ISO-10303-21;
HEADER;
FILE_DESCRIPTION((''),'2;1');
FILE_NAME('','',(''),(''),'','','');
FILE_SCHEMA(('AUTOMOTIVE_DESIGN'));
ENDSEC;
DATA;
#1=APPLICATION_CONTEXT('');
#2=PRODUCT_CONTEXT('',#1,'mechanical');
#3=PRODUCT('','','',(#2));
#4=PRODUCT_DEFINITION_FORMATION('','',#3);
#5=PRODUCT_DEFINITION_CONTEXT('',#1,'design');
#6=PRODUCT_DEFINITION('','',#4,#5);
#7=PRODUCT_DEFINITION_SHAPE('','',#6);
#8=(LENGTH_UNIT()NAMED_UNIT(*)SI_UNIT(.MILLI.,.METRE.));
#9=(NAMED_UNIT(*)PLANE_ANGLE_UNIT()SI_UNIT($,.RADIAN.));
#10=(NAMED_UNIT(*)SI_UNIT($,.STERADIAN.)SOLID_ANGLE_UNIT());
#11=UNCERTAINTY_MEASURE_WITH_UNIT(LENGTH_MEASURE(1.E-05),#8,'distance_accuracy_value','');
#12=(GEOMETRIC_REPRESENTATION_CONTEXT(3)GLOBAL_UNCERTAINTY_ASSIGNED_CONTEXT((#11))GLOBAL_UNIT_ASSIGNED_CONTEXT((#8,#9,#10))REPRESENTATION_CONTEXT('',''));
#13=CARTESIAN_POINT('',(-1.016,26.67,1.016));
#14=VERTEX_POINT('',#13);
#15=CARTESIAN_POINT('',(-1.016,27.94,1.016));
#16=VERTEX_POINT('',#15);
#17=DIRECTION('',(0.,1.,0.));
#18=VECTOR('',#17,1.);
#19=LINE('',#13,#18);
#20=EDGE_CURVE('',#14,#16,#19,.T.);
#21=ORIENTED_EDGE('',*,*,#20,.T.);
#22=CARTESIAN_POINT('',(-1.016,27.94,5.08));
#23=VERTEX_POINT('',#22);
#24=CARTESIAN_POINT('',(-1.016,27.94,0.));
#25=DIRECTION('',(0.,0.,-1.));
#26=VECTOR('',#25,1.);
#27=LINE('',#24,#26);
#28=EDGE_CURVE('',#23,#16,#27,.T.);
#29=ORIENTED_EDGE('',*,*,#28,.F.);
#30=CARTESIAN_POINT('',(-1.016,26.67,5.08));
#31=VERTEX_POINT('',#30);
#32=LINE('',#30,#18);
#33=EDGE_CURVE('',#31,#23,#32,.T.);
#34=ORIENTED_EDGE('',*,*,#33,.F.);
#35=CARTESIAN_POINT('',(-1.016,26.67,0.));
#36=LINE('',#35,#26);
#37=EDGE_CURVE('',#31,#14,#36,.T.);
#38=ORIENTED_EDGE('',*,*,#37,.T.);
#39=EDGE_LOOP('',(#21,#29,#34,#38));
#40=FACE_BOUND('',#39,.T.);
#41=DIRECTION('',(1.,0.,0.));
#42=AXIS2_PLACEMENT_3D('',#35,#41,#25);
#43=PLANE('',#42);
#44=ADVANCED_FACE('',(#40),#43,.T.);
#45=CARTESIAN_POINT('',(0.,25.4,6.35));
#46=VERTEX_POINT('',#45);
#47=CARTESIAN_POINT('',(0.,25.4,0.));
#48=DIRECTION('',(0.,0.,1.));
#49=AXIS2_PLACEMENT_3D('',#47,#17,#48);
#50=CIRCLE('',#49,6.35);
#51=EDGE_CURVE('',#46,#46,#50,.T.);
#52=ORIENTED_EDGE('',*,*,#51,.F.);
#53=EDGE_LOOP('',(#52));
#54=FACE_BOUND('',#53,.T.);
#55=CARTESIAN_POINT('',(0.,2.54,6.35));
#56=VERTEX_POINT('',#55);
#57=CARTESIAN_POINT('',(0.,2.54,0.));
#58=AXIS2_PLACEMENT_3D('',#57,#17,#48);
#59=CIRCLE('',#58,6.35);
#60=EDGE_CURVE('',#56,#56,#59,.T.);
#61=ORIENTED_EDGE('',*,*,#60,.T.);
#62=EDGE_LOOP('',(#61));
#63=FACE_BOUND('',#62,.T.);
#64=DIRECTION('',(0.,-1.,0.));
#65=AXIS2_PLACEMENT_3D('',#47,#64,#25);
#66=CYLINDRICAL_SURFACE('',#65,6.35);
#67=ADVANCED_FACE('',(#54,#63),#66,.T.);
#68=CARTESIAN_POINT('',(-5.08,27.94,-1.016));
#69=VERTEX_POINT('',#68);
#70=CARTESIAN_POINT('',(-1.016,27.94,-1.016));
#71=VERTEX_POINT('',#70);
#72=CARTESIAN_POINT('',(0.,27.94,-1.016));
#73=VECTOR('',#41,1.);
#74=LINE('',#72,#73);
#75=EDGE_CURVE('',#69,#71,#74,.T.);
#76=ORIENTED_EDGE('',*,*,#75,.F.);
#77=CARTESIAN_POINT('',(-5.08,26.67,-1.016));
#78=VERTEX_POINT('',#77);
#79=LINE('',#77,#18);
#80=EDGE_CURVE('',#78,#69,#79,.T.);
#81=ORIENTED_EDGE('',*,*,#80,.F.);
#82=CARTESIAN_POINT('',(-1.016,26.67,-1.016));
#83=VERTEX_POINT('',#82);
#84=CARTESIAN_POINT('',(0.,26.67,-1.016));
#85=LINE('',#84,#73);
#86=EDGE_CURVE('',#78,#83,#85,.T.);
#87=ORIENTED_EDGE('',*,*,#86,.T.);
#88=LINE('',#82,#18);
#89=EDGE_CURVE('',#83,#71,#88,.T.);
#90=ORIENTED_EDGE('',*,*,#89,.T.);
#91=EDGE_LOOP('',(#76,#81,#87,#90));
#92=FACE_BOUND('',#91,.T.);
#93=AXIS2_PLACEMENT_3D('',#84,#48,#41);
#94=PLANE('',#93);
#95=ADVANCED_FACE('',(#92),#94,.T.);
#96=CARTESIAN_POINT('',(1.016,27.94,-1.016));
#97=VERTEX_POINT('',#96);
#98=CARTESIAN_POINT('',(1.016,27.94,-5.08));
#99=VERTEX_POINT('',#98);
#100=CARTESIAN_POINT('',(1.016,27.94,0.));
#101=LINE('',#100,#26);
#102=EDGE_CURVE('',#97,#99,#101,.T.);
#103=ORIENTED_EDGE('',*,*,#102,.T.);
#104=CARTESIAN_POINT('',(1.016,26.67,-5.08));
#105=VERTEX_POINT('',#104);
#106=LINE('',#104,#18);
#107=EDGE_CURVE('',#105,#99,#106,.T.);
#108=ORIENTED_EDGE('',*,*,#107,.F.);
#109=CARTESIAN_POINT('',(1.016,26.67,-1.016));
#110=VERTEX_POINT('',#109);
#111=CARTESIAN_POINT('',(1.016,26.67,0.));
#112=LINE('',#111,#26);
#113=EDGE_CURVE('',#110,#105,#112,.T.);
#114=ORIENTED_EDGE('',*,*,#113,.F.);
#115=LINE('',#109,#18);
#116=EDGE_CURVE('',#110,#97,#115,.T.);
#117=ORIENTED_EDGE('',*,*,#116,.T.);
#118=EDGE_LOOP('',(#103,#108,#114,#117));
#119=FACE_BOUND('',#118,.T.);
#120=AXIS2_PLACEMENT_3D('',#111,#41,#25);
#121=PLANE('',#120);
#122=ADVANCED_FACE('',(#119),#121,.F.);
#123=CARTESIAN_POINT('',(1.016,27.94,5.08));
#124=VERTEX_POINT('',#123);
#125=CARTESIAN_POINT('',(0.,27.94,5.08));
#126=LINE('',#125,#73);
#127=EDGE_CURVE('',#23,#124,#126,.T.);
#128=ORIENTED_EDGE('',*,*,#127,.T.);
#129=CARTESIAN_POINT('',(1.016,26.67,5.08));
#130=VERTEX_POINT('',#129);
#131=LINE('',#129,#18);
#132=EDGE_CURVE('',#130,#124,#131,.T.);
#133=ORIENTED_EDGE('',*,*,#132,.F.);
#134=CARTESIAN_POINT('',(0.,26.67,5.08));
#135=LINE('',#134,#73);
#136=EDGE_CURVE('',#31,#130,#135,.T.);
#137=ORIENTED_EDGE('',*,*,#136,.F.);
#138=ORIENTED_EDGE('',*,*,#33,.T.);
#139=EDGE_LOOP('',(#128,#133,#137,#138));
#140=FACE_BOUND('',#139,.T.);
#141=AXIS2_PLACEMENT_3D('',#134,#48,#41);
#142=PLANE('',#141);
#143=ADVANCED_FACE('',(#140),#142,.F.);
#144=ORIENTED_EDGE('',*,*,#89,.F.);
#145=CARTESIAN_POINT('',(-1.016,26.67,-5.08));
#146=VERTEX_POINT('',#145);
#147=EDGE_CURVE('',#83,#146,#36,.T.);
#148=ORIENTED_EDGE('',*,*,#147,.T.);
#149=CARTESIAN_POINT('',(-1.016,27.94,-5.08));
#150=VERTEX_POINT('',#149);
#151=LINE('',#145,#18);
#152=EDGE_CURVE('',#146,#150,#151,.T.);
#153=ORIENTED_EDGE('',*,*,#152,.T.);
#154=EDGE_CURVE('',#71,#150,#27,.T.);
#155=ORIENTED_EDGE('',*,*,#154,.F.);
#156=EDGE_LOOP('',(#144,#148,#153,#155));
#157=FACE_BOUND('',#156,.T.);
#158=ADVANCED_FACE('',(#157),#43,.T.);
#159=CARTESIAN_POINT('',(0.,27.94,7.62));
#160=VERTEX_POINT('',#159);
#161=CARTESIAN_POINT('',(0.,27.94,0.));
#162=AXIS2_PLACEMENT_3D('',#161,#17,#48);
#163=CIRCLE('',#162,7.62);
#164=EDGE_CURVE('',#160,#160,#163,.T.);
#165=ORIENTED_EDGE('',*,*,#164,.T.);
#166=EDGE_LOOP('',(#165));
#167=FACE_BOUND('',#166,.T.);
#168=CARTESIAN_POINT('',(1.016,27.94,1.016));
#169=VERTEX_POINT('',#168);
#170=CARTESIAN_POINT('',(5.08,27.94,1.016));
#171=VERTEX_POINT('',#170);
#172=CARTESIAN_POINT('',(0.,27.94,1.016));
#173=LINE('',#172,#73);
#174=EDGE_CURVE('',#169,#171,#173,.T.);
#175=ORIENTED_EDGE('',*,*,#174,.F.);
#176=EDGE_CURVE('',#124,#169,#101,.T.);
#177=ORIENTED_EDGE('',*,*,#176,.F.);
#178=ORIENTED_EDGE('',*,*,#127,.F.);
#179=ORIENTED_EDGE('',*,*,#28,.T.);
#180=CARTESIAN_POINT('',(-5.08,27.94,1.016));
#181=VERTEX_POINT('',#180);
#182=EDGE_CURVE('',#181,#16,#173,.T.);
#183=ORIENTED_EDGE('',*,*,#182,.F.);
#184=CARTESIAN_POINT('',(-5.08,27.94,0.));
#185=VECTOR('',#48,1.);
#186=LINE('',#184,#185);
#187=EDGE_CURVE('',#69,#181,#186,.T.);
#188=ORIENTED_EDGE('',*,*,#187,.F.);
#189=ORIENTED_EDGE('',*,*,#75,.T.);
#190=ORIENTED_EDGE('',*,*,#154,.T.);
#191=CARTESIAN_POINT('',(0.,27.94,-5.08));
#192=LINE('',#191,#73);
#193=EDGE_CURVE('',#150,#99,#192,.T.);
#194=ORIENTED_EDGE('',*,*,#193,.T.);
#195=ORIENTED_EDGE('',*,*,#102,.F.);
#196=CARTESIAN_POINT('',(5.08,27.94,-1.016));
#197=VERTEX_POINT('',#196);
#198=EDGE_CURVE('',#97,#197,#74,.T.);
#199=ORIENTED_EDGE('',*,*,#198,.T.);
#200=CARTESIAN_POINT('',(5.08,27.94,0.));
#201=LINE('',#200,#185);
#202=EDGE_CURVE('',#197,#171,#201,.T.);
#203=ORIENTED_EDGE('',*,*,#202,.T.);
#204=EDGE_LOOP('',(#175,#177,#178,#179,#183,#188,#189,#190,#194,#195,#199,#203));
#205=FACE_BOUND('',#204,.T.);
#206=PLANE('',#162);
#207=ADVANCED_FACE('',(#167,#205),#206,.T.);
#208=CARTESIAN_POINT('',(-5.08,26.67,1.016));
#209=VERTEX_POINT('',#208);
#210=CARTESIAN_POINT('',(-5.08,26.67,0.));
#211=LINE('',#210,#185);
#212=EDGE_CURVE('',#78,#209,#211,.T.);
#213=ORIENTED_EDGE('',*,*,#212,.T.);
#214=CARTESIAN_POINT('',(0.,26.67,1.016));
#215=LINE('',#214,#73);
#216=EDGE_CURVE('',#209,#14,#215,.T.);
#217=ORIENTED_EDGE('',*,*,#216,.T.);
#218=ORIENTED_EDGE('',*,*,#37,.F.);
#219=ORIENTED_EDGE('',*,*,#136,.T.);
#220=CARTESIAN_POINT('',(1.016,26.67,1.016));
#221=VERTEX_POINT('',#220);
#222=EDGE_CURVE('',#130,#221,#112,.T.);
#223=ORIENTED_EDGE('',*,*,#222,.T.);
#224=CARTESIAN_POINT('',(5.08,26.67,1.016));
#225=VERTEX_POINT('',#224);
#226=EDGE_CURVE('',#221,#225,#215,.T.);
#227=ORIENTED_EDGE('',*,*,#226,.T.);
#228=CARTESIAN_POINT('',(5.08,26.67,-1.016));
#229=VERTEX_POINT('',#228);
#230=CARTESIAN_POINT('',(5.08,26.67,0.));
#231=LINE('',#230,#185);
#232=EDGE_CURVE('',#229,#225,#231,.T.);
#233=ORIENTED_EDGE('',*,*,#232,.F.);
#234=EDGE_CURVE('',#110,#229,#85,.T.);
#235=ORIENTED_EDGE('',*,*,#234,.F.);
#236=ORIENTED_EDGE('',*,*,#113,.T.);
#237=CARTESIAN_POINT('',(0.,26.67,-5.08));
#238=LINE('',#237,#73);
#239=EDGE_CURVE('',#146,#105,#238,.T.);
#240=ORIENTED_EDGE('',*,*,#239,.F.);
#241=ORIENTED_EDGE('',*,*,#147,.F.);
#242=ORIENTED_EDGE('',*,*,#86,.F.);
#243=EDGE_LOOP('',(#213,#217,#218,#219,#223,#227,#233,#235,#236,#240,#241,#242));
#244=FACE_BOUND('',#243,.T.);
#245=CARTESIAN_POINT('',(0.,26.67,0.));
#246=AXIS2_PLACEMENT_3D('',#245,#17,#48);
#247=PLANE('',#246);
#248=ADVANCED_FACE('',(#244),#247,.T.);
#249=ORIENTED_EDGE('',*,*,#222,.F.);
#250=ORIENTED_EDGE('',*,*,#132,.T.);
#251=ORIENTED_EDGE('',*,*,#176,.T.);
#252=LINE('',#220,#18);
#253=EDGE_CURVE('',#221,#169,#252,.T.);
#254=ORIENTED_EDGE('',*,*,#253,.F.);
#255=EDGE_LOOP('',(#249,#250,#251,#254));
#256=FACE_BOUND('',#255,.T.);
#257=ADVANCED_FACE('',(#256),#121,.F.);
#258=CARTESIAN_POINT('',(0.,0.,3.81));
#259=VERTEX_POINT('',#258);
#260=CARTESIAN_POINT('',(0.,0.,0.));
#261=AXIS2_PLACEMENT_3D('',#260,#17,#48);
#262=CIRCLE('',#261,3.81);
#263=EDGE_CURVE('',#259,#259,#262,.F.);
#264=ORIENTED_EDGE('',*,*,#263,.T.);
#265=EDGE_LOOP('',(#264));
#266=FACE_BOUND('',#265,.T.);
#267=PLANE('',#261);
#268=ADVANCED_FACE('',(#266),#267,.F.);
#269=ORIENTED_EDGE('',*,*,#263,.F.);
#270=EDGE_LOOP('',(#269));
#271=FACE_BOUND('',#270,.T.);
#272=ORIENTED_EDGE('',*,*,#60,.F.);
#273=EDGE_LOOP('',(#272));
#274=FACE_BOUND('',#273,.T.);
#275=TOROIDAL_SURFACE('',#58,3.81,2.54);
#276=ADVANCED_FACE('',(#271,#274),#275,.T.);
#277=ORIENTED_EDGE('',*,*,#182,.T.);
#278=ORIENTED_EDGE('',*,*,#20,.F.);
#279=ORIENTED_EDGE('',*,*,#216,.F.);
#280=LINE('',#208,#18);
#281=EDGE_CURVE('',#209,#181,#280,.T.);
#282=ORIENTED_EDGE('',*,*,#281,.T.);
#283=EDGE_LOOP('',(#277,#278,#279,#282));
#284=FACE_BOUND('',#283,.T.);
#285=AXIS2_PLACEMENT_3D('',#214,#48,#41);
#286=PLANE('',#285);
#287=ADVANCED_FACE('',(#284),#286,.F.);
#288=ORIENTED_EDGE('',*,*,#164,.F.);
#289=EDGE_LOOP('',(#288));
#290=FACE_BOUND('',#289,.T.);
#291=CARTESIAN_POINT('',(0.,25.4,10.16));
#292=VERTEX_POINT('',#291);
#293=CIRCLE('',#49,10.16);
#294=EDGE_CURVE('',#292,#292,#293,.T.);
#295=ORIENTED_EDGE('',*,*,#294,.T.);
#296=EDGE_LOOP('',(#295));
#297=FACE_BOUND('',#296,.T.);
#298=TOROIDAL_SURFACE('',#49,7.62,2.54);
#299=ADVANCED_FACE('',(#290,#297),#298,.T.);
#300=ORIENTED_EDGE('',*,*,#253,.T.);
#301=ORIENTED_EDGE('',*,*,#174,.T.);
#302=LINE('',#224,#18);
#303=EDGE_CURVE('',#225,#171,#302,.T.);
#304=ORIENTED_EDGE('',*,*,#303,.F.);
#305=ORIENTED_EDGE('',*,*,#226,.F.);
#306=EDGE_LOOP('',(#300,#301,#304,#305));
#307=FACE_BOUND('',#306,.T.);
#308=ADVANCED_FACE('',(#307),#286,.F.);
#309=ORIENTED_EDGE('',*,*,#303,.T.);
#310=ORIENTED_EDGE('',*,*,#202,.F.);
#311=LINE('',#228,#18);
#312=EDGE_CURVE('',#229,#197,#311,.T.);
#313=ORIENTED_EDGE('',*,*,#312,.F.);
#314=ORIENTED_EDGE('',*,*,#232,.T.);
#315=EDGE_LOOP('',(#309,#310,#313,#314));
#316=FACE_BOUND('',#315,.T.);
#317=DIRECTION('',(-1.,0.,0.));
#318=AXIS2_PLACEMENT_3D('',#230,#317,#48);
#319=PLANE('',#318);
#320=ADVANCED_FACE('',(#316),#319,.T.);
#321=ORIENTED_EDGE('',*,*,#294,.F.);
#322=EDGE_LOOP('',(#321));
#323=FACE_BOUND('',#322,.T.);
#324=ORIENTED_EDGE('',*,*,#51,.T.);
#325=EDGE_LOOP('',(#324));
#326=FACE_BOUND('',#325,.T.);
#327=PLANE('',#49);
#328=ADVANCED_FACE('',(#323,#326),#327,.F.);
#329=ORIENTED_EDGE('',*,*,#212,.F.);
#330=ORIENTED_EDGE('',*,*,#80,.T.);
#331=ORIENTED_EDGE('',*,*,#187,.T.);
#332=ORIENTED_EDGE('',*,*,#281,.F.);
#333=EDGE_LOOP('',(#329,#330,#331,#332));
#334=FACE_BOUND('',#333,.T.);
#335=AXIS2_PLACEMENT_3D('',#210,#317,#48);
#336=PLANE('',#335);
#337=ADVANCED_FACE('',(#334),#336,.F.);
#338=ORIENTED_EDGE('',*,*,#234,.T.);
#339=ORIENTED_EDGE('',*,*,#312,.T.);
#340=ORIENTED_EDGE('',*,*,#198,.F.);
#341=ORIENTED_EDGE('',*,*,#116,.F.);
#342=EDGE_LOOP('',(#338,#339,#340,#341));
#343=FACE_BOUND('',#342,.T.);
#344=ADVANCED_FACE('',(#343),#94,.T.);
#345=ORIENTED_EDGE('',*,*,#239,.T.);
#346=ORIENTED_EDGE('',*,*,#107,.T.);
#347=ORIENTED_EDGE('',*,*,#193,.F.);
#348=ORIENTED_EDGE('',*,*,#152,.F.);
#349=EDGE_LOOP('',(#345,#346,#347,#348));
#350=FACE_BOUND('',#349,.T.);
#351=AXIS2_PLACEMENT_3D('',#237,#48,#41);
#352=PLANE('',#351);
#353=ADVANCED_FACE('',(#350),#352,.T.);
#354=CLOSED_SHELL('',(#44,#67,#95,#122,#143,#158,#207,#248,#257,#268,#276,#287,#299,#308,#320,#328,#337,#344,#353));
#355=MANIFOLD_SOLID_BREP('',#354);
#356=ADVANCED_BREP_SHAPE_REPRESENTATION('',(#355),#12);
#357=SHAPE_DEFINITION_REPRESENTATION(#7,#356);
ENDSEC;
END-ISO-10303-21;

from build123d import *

# Parameters (mm, degrees)
SKETCH1_R           = 6.35
BOSS_EXTRUDE1_DEPTH = 25.4
SKETCH2_R           = 10.16
BOSS_EXTRUDE2_DEPTH = 2.54
FILLET1_R           = 2.54
SKETCH3_W           = 4.064
SKETCH3_H           = 2.032
SKETCH3_W_2         = 2.032
SKETCH3_H_2         = 4.064
CUT_EXTRUDE1_DEPTH  = 1.27
FILLET2_R           = 2.54


with BuildPart() as part:
    # Sketch1 → Boss-Extrude1 (new body)
    with BuildSketch(Plane(origin=(0, 0, 0), x_dir=(1, 0, 0), z_dir=(0, 1, 0))):
        with Locations(Location((0, 0, 0), (0, 0, 270))):
            Circle(SKETCH1_R)
    extrude(amount=BOSS_EXTRUDE1_DEPTH)

    # Sketch2 → Boss-Extrude2 (add)
    with BuildSketch(Plane(origin=(0, 25.4, 0), x_dir=(1, 0, 0), z_dir=(0, 1, 0))):
        with Locations(Location((0, 0, 0), (0, 0, 270))):
            Circle(SKETCH2_R)
    extrude(amount=BOSS_EXTRUDE2_DEPTH)

    # Fillet1
    fillet1_edges = [part.edges().sort_by_distance(p)[0] for p in [
        (0, 27.94, -10.16),
    ]]
    fillet(fillet1_edges, radius=FILLET1_R - 0.0001)  # a hair under: the kernel refuses the full size

    # Sketch3 → Cut-Extrude1 (cut)
    with BuildSketch(Plane(origin=(0, 27.94, 0), x_dir=(1, 0, 0), z_dir=(0, 1, 0))):
        with Locations((-3.048, 0)):
            Rectangle(SKETCH3_W, SKETCH3_H)
        with Locations((0, 3.048)):
            Rectangle(SKETCH3_W_2, SKETCH3_H_2)
        with Locations((3.048, 0)):
            Rectangle(SKETCH3_W, SKETCH3_H)
        Rectangle(SKETCH3_W_2, SKETCH3_H)
        with Locations((0, -3.048)):
            Rectangle(SKETCH3_W_2, SKETCH3_H_2)
    extrude(amount=-CUT_EXTRUDE1_DEPTH, mode=Mode.SUBTRACT)

    # Fillet2
    fillet2_edges = [part.edges().sort_by_distance(p)[0] for p in [
        (0, 0, -6.35),
    ]]
    fillet(fillet2_edges, radius=FILLET2_R)


solid = part.part
